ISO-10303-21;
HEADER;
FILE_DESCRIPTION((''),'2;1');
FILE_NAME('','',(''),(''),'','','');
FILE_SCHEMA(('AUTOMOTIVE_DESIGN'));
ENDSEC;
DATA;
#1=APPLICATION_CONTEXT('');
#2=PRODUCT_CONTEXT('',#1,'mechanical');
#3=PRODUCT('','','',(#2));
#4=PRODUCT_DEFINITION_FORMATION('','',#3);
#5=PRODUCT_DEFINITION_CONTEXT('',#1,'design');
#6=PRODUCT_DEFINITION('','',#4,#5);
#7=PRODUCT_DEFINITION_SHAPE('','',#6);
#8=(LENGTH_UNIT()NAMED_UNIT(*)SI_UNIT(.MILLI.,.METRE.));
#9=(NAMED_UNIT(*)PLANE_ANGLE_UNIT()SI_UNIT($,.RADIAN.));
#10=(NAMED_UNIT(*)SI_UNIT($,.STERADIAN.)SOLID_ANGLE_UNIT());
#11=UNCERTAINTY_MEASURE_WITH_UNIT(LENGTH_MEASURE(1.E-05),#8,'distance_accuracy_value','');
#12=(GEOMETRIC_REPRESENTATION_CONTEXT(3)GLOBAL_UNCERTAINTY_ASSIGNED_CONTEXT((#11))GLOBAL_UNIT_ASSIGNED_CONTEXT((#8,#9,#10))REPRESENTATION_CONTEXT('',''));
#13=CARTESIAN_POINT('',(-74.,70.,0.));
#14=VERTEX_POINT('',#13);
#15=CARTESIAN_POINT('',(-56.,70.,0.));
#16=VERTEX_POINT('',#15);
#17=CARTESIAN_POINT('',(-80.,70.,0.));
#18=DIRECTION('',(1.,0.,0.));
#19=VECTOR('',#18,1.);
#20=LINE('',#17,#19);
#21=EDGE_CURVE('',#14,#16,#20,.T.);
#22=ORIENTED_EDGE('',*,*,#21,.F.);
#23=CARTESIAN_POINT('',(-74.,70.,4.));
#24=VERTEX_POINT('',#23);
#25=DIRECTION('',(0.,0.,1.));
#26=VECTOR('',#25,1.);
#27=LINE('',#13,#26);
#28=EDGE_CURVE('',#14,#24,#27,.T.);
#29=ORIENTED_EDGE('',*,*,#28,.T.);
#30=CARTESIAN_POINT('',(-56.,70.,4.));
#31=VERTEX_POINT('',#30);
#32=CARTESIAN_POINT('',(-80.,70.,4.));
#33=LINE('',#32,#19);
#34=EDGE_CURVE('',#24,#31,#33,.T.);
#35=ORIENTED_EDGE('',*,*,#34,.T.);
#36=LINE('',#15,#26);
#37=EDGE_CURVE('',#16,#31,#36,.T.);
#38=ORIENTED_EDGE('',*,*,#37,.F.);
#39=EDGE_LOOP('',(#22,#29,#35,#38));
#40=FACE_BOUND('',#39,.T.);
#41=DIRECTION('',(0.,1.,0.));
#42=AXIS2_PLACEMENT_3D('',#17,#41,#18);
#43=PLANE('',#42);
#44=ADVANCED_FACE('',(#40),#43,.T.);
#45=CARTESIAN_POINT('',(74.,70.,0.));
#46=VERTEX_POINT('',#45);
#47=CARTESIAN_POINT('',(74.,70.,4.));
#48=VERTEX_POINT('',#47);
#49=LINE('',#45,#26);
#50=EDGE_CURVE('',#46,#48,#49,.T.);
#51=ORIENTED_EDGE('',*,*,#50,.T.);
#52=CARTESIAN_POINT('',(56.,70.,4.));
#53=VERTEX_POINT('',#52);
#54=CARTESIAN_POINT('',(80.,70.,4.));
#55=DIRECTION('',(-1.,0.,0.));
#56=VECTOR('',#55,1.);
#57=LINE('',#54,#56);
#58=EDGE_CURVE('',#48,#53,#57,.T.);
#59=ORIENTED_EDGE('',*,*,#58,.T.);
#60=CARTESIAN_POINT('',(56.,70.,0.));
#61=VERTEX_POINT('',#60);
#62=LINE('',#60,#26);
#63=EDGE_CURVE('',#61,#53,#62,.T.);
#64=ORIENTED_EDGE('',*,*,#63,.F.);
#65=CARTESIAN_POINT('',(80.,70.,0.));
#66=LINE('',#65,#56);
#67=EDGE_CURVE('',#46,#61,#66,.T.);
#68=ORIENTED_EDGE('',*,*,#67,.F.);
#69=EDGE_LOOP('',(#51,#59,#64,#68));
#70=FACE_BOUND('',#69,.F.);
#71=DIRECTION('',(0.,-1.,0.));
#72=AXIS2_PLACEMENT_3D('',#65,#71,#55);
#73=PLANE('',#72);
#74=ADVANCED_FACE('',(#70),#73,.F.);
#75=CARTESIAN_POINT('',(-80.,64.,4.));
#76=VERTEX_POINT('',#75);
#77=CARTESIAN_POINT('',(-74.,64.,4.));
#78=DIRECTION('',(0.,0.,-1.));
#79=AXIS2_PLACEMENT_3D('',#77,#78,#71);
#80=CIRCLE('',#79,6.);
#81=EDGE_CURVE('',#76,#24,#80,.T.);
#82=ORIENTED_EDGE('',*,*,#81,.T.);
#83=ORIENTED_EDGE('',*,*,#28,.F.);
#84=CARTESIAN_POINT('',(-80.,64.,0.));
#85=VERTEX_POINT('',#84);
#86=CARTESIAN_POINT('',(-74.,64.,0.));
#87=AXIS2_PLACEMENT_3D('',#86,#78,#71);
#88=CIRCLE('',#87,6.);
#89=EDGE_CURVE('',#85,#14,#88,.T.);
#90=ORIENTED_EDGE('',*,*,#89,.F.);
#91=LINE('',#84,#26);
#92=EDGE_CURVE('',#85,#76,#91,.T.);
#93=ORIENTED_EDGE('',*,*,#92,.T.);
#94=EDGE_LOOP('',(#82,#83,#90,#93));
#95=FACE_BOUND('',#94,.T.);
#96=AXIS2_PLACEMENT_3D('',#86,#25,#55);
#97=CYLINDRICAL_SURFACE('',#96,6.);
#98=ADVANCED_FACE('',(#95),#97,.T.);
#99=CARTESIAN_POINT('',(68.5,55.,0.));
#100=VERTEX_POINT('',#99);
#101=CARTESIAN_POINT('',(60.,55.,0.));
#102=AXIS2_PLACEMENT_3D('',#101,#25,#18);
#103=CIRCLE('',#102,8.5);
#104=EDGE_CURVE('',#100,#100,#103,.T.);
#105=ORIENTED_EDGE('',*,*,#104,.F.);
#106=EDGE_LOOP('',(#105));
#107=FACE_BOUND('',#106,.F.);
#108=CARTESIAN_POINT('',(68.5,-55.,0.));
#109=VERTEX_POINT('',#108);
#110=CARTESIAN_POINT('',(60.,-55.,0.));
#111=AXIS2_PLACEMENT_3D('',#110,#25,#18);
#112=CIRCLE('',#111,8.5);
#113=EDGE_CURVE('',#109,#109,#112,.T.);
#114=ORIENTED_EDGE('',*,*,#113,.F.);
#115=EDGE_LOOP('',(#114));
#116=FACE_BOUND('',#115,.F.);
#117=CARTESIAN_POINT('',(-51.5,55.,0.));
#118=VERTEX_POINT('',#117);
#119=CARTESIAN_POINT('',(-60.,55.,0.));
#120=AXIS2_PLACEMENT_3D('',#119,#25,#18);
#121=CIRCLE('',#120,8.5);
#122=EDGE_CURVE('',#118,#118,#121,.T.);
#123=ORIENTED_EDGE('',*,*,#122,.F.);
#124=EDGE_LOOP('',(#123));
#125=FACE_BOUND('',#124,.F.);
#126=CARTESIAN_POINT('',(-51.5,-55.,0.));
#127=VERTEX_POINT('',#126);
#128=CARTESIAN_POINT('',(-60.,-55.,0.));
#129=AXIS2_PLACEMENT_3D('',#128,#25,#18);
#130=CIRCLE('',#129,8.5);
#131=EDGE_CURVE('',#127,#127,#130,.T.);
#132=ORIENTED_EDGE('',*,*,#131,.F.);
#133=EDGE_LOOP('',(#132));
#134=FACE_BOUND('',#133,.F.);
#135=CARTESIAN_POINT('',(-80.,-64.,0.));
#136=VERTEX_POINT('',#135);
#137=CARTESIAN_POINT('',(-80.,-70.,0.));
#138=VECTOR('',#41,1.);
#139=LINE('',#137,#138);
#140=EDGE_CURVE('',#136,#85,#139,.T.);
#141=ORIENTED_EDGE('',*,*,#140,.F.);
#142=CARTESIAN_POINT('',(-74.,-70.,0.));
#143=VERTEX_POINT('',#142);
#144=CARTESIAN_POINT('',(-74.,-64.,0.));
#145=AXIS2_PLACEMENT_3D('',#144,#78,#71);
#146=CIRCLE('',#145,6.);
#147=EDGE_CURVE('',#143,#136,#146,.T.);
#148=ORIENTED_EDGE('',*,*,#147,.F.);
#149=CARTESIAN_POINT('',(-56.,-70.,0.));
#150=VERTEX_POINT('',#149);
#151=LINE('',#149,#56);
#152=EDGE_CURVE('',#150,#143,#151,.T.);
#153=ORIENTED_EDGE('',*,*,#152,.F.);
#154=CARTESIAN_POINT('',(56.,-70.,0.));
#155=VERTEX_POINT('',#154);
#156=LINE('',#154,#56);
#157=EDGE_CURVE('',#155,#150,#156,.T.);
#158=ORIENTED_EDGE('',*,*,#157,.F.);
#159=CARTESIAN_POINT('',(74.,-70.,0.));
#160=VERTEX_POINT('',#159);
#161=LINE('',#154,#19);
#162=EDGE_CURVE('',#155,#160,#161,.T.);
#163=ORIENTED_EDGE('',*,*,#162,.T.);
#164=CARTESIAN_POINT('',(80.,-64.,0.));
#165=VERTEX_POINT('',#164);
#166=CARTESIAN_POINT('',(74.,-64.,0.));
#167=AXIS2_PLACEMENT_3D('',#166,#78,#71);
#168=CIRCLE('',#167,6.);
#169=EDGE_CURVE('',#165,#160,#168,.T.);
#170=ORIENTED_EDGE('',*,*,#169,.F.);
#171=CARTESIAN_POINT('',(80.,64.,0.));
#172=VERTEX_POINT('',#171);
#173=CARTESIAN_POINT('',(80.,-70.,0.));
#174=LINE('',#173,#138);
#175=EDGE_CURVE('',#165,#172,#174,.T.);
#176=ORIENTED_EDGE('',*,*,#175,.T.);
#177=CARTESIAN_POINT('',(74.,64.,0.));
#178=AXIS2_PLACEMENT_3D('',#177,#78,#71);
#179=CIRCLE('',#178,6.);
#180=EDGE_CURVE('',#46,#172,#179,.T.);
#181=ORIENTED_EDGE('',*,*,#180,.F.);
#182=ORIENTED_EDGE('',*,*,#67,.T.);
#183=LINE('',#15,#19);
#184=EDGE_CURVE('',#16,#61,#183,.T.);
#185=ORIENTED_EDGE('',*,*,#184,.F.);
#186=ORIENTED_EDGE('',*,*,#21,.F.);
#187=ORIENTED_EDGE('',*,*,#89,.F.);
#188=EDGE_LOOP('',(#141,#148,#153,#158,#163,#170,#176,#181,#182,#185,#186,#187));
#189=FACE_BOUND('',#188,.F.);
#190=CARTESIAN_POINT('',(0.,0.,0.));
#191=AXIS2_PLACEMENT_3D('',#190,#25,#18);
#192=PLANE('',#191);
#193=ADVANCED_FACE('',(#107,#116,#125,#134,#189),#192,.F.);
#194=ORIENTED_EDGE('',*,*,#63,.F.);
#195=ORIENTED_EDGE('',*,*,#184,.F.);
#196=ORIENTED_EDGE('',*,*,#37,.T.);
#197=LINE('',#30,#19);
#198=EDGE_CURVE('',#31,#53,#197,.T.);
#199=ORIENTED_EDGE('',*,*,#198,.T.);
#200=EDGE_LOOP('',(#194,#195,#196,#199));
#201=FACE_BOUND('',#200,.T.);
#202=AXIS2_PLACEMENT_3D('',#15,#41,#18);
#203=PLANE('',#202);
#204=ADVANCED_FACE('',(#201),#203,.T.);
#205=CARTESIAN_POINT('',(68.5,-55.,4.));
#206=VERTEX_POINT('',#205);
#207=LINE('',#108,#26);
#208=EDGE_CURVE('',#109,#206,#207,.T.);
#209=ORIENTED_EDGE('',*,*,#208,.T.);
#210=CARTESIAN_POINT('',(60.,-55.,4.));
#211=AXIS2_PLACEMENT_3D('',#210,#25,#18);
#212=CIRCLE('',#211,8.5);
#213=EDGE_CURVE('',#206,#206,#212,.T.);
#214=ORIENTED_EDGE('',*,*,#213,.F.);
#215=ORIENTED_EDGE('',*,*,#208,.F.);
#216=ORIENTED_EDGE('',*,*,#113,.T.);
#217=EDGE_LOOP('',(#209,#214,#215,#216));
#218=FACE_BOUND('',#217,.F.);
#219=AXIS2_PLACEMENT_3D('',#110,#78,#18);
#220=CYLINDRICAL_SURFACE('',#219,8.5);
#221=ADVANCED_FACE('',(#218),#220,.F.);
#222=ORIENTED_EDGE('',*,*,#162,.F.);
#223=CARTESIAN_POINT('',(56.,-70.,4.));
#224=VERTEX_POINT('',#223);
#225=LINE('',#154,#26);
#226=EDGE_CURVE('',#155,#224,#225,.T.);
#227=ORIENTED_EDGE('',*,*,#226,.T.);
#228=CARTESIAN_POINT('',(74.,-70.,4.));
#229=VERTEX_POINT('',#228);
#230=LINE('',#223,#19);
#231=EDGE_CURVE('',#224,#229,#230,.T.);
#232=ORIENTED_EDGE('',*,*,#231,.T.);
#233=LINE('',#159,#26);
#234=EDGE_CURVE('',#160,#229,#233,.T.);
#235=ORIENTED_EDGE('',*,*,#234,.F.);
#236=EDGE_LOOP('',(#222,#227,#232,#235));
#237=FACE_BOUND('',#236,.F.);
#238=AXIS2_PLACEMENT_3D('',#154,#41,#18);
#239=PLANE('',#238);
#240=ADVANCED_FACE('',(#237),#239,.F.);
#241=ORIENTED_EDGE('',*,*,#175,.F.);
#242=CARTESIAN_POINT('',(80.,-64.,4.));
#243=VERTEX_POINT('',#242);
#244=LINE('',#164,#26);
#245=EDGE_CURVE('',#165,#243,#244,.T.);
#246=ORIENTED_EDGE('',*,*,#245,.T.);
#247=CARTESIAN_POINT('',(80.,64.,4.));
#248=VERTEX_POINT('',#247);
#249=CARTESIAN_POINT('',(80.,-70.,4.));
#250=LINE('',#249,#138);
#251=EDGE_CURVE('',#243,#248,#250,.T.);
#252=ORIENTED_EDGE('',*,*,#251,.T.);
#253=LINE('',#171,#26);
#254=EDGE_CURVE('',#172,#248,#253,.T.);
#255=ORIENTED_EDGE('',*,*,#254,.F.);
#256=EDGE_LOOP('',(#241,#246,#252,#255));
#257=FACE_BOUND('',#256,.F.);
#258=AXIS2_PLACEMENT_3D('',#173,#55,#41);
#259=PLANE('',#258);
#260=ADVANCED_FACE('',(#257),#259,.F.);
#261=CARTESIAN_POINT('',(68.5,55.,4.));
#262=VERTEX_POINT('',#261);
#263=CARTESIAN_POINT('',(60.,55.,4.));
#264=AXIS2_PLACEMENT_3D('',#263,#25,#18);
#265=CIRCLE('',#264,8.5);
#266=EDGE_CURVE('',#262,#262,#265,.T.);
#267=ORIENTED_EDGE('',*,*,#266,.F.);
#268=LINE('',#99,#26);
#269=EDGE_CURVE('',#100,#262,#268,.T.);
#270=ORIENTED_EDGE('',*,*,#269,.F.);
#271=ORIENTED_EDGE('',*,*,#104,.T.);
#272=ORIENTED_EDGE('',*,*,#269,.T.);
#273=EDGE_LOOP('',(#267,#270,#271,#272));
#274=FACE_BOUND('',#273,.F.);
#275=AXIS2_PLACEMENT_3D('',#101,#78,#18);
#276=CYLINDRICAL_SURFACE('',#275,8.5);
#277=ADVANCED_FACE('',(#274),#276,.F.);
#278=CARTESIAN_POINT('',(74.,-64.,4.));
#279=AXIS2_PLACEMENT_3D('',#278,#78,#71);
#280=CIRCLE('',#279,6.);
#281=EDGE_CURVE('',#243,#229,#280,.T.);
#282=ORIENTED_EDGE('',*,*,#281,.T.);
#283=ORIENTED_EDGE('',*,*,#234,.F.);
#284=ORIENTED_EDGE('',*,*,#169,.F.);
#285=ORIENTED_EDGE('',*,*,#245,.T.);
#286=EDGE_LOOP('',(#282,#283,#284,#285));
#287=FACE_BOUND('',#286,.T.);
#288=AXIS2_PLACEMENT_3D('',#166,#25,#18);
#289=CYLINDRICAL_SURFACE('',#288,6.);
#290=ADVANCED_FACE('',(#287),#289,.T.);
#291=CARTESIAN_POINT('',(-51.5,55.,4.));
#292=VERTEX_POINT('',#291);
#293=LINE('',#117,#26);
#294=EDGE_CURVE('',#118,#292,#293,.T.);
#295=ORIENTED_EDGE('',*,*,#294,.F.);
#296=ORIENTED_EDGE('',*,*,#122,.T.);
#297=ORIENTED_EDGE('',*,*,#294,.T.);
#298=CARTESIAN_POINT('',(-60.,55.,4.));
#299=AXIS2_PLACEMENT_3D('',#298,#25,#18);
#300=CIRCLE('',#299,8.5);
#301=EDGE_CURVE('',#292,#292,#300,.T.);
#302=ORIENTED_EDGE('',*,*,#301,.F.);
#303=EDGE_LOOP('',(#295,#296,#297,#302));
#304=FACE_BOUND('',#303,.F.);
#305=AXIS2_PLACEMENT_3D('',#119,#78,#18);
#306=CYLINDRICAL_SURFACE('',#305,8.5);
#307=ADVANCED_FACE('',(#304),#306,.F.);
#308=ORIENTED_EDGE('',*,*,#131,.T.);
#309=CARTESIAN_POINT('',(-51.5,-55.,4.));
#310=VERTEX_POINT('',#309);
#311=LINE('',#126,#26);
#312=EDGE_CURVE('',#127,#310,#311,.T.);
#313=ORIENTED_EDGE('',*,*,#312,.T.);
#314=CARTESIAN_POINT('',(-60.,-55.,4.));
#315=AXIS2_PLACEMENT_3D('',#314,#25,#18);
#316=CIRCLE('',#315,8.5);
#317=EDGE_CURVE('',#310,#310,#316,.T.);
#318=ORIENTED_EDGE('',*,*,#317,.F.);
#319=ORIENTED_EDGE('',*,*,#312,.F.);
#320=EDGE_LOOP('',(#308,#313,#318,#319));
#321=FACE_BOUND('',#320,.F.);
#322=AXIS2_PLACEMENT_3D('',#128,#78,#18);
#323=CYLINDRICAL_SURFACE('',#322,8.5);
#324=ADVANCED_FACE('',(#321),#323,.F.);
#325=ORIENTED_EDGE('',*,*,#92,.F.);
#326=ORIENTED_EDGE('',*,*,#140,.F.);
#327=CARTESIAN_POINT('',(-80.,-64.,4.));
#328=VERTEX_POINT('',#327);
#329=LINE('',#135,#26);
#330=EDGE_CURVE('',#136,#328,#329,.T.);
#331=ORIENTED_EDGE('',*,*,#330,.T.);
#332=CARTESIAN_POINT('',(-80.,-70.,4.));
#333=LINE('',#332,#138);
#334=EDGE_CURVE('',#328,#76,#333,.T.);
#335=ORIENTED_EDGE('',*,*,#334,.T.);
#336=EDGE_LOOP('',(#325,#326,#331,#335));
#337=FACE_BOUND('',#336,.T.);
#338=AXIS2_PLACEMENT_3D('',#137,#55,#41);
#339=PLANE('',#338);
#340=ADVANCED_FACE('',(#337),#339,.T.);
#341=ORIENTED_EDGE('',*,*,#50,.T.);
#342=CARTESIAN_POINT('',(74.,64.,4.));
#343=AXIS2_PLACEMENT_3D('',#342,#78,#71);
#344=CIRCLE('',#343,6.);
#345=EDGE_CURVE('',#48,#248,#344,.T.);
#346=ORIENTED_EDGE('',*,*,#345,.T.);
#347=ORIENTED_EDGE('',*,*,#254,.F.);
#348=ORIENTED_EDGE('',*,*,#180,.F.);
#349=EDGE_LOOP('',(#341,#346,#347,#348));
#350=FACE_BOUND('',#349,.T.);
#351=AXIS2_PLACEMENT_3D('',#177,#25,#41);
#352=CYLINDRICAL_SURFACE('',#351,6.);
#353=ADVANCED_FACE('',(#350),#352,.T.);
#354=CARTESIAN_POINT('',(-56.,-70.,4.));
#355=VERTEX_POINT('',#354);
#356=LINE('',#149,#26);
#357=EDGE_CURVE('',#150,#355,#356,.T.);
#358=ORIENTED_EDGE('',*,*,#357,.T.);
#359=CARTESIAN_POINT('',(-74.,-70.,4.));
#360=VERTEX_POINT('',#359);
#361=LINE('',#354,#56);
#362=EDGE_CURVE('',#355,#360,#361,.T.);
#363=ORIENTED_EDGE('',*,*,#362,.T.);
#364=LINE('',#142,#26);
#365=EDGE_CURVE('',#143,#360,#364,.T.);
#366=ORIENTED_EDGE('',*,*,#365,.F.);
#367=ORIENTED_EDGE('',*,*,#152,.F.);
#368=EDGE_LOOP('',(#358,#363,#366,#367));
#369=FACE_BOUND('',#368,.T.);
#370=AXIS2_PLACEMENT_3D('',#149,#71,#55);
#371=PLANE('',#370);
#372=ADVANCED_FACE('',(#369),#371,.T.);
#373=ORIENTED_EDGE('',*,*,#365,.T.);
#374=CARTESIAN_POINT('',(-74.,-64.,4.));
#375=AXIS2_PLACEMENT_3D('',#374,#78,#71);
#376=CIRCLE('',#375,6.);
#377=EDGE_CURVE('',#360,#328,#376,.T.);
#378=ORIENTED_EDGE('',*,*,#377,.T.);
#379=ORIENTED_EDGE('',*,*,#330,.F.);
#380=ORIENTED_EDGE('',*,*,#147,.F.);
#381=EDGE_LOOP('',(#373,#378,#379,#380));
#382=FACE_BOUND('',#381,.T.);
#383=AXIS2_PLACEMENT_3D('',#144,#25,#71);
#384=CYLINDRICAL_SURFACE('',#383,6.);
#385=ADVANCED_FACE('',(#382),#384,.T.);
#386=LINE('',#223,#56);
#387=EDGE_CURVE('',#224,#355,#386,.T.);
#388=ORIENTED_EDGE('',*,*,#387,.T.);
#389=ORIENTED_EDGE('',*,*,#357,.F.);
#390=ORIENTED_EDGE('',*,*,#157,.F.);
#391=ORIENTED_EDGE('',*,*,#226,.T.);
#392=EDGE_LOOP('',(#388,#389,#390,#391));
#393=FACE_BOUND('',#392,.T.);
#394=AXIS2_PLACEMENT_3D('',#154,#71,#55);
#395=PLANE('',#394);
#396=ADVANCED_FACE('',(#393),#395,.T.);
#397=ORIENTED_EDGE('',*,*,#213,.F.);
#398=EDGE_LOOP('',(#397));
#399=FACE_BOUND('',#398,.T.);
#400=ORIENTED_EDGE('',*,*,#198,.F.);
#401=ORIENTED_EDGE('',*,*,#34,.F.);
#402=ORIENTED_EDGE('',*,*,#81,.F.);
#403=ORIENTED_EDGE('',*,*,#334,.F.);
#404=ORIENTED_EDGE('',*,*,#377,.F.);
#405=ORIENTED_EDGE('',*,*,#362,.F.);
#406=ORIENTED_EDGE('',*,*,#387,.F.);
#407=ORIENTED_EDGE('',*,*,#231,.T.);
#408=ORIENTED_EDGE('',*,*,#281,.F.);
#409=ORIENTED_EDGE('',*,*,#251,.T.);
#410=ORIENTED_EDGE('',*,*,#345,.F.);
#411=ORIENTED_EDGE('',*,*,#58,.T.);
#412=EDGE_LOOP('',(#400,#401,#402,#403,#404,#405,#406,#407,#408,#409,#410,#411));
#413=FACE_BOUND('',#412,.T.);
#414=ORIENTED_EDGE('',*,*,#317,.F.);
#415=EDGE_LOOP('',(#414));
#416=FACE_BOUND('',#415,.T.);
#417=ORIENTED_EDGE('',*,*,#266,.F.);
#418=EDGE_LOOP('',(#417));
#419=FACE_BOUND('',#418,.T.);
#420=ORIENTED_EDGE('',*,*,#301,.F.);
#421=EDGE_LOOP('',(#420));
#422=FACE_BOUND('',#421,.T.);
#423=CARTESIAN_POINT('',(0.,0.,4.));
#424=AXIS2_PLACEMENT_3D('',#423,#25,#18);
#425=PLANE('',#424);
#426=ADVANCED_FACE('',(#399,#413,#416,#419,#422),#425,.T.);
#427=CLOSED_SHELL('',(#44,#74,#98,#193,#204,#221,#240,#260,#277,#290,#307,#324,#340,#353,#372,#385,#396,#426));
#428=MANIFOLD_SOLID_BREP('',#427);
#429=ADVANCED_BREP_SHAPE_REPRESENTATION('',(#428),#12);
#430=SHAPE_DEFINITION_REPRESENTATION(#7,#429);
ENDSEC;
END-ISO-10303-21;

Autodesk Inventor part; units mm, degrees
ref_plane "YZ Plane" through (0, 0, 0) normal (1, 0, 0) x (0, 1, 0)
ref_plane "XZ Plane" through (0, 0, 0) normal (0, 1, 0) x (-1, 0, 0)
ref_plane "XY Plane" through (0, 0, 0) normal (0, 0, 1) x (1, 0, 0)
sketch3d "3D Sketch1"
sketch "Sketch1" plane through (0, 0, 0) normal (0, 0, 1) x (1, 0, 0)
  line L0 (-56, 70) -> (56, 70)
  line L1 (56, 70) -> (56, -70) construction
  line L2 (56, -70) -> (-56, -70)
  line L3 (-56, -70) -> (-56, 70) construction
  line L4 (-56, 70) -> (56, -70) construction
  line L5 (56, 70) -> (-56, -70) construction
  line L6 (56, -70) -> (80, -70)
  line L7 (80, -70) -> (80, 70)
  line L8 (80, 70) -> (56, 70)
  line L9 (-56, -70) -> (-80, -70)
  line L10 (-80, -70) -> (-80, 70)
  line L11 (-80, 70) -> (-56, 70)
  circle A0 centre (60, -55) radius 8.5
  circle A1 centre (60, 55) radius 8.5
  circle A2 centre (-60, -55) radius 8.5
  circle A3 centre (-60, 55) radius 8.5
  line L12 (0, -70) -> (0, 70) construction
  line L13 (80, 0) -> (-80, 0) construction
  point P0 (0, 0)
  dimension "d30" = 140
  dimension "d34" = 160
  dimension "d35" = 17
  dimension "d36" = 20
  dimension "d37" = 15
extrude "Plate1" add sketch "Sketch1" along normal blind 4
fillet "Corner Round1" radius 6 4 edges at (80, 70, 2) (-80, 70, 2) (-80, -70, 2) (80, -70, 2)
equation "\"d6\" = Thickness"
equation "\"BendReliefWidth\" = Thickness"
equation "\"BendReliefDepth\" = 0.5 * Thickness"
equation "\"CornerReliefSize\" = 4 * Thickness"
equation "\"MinimumRemnant\" = 2 * Thickness"
equation "\"TransitionRadius\" = BendRadius"
equation "\"JacobiRadiusSize\" = BendRadius"
equation "\"GapSize\" = Thickness"
equation "\"Thickness\" = 4"
equation "\"BendRadius\" = 6"
properties part number "ASY MSC 909 base frame transverse" material "Steel"
